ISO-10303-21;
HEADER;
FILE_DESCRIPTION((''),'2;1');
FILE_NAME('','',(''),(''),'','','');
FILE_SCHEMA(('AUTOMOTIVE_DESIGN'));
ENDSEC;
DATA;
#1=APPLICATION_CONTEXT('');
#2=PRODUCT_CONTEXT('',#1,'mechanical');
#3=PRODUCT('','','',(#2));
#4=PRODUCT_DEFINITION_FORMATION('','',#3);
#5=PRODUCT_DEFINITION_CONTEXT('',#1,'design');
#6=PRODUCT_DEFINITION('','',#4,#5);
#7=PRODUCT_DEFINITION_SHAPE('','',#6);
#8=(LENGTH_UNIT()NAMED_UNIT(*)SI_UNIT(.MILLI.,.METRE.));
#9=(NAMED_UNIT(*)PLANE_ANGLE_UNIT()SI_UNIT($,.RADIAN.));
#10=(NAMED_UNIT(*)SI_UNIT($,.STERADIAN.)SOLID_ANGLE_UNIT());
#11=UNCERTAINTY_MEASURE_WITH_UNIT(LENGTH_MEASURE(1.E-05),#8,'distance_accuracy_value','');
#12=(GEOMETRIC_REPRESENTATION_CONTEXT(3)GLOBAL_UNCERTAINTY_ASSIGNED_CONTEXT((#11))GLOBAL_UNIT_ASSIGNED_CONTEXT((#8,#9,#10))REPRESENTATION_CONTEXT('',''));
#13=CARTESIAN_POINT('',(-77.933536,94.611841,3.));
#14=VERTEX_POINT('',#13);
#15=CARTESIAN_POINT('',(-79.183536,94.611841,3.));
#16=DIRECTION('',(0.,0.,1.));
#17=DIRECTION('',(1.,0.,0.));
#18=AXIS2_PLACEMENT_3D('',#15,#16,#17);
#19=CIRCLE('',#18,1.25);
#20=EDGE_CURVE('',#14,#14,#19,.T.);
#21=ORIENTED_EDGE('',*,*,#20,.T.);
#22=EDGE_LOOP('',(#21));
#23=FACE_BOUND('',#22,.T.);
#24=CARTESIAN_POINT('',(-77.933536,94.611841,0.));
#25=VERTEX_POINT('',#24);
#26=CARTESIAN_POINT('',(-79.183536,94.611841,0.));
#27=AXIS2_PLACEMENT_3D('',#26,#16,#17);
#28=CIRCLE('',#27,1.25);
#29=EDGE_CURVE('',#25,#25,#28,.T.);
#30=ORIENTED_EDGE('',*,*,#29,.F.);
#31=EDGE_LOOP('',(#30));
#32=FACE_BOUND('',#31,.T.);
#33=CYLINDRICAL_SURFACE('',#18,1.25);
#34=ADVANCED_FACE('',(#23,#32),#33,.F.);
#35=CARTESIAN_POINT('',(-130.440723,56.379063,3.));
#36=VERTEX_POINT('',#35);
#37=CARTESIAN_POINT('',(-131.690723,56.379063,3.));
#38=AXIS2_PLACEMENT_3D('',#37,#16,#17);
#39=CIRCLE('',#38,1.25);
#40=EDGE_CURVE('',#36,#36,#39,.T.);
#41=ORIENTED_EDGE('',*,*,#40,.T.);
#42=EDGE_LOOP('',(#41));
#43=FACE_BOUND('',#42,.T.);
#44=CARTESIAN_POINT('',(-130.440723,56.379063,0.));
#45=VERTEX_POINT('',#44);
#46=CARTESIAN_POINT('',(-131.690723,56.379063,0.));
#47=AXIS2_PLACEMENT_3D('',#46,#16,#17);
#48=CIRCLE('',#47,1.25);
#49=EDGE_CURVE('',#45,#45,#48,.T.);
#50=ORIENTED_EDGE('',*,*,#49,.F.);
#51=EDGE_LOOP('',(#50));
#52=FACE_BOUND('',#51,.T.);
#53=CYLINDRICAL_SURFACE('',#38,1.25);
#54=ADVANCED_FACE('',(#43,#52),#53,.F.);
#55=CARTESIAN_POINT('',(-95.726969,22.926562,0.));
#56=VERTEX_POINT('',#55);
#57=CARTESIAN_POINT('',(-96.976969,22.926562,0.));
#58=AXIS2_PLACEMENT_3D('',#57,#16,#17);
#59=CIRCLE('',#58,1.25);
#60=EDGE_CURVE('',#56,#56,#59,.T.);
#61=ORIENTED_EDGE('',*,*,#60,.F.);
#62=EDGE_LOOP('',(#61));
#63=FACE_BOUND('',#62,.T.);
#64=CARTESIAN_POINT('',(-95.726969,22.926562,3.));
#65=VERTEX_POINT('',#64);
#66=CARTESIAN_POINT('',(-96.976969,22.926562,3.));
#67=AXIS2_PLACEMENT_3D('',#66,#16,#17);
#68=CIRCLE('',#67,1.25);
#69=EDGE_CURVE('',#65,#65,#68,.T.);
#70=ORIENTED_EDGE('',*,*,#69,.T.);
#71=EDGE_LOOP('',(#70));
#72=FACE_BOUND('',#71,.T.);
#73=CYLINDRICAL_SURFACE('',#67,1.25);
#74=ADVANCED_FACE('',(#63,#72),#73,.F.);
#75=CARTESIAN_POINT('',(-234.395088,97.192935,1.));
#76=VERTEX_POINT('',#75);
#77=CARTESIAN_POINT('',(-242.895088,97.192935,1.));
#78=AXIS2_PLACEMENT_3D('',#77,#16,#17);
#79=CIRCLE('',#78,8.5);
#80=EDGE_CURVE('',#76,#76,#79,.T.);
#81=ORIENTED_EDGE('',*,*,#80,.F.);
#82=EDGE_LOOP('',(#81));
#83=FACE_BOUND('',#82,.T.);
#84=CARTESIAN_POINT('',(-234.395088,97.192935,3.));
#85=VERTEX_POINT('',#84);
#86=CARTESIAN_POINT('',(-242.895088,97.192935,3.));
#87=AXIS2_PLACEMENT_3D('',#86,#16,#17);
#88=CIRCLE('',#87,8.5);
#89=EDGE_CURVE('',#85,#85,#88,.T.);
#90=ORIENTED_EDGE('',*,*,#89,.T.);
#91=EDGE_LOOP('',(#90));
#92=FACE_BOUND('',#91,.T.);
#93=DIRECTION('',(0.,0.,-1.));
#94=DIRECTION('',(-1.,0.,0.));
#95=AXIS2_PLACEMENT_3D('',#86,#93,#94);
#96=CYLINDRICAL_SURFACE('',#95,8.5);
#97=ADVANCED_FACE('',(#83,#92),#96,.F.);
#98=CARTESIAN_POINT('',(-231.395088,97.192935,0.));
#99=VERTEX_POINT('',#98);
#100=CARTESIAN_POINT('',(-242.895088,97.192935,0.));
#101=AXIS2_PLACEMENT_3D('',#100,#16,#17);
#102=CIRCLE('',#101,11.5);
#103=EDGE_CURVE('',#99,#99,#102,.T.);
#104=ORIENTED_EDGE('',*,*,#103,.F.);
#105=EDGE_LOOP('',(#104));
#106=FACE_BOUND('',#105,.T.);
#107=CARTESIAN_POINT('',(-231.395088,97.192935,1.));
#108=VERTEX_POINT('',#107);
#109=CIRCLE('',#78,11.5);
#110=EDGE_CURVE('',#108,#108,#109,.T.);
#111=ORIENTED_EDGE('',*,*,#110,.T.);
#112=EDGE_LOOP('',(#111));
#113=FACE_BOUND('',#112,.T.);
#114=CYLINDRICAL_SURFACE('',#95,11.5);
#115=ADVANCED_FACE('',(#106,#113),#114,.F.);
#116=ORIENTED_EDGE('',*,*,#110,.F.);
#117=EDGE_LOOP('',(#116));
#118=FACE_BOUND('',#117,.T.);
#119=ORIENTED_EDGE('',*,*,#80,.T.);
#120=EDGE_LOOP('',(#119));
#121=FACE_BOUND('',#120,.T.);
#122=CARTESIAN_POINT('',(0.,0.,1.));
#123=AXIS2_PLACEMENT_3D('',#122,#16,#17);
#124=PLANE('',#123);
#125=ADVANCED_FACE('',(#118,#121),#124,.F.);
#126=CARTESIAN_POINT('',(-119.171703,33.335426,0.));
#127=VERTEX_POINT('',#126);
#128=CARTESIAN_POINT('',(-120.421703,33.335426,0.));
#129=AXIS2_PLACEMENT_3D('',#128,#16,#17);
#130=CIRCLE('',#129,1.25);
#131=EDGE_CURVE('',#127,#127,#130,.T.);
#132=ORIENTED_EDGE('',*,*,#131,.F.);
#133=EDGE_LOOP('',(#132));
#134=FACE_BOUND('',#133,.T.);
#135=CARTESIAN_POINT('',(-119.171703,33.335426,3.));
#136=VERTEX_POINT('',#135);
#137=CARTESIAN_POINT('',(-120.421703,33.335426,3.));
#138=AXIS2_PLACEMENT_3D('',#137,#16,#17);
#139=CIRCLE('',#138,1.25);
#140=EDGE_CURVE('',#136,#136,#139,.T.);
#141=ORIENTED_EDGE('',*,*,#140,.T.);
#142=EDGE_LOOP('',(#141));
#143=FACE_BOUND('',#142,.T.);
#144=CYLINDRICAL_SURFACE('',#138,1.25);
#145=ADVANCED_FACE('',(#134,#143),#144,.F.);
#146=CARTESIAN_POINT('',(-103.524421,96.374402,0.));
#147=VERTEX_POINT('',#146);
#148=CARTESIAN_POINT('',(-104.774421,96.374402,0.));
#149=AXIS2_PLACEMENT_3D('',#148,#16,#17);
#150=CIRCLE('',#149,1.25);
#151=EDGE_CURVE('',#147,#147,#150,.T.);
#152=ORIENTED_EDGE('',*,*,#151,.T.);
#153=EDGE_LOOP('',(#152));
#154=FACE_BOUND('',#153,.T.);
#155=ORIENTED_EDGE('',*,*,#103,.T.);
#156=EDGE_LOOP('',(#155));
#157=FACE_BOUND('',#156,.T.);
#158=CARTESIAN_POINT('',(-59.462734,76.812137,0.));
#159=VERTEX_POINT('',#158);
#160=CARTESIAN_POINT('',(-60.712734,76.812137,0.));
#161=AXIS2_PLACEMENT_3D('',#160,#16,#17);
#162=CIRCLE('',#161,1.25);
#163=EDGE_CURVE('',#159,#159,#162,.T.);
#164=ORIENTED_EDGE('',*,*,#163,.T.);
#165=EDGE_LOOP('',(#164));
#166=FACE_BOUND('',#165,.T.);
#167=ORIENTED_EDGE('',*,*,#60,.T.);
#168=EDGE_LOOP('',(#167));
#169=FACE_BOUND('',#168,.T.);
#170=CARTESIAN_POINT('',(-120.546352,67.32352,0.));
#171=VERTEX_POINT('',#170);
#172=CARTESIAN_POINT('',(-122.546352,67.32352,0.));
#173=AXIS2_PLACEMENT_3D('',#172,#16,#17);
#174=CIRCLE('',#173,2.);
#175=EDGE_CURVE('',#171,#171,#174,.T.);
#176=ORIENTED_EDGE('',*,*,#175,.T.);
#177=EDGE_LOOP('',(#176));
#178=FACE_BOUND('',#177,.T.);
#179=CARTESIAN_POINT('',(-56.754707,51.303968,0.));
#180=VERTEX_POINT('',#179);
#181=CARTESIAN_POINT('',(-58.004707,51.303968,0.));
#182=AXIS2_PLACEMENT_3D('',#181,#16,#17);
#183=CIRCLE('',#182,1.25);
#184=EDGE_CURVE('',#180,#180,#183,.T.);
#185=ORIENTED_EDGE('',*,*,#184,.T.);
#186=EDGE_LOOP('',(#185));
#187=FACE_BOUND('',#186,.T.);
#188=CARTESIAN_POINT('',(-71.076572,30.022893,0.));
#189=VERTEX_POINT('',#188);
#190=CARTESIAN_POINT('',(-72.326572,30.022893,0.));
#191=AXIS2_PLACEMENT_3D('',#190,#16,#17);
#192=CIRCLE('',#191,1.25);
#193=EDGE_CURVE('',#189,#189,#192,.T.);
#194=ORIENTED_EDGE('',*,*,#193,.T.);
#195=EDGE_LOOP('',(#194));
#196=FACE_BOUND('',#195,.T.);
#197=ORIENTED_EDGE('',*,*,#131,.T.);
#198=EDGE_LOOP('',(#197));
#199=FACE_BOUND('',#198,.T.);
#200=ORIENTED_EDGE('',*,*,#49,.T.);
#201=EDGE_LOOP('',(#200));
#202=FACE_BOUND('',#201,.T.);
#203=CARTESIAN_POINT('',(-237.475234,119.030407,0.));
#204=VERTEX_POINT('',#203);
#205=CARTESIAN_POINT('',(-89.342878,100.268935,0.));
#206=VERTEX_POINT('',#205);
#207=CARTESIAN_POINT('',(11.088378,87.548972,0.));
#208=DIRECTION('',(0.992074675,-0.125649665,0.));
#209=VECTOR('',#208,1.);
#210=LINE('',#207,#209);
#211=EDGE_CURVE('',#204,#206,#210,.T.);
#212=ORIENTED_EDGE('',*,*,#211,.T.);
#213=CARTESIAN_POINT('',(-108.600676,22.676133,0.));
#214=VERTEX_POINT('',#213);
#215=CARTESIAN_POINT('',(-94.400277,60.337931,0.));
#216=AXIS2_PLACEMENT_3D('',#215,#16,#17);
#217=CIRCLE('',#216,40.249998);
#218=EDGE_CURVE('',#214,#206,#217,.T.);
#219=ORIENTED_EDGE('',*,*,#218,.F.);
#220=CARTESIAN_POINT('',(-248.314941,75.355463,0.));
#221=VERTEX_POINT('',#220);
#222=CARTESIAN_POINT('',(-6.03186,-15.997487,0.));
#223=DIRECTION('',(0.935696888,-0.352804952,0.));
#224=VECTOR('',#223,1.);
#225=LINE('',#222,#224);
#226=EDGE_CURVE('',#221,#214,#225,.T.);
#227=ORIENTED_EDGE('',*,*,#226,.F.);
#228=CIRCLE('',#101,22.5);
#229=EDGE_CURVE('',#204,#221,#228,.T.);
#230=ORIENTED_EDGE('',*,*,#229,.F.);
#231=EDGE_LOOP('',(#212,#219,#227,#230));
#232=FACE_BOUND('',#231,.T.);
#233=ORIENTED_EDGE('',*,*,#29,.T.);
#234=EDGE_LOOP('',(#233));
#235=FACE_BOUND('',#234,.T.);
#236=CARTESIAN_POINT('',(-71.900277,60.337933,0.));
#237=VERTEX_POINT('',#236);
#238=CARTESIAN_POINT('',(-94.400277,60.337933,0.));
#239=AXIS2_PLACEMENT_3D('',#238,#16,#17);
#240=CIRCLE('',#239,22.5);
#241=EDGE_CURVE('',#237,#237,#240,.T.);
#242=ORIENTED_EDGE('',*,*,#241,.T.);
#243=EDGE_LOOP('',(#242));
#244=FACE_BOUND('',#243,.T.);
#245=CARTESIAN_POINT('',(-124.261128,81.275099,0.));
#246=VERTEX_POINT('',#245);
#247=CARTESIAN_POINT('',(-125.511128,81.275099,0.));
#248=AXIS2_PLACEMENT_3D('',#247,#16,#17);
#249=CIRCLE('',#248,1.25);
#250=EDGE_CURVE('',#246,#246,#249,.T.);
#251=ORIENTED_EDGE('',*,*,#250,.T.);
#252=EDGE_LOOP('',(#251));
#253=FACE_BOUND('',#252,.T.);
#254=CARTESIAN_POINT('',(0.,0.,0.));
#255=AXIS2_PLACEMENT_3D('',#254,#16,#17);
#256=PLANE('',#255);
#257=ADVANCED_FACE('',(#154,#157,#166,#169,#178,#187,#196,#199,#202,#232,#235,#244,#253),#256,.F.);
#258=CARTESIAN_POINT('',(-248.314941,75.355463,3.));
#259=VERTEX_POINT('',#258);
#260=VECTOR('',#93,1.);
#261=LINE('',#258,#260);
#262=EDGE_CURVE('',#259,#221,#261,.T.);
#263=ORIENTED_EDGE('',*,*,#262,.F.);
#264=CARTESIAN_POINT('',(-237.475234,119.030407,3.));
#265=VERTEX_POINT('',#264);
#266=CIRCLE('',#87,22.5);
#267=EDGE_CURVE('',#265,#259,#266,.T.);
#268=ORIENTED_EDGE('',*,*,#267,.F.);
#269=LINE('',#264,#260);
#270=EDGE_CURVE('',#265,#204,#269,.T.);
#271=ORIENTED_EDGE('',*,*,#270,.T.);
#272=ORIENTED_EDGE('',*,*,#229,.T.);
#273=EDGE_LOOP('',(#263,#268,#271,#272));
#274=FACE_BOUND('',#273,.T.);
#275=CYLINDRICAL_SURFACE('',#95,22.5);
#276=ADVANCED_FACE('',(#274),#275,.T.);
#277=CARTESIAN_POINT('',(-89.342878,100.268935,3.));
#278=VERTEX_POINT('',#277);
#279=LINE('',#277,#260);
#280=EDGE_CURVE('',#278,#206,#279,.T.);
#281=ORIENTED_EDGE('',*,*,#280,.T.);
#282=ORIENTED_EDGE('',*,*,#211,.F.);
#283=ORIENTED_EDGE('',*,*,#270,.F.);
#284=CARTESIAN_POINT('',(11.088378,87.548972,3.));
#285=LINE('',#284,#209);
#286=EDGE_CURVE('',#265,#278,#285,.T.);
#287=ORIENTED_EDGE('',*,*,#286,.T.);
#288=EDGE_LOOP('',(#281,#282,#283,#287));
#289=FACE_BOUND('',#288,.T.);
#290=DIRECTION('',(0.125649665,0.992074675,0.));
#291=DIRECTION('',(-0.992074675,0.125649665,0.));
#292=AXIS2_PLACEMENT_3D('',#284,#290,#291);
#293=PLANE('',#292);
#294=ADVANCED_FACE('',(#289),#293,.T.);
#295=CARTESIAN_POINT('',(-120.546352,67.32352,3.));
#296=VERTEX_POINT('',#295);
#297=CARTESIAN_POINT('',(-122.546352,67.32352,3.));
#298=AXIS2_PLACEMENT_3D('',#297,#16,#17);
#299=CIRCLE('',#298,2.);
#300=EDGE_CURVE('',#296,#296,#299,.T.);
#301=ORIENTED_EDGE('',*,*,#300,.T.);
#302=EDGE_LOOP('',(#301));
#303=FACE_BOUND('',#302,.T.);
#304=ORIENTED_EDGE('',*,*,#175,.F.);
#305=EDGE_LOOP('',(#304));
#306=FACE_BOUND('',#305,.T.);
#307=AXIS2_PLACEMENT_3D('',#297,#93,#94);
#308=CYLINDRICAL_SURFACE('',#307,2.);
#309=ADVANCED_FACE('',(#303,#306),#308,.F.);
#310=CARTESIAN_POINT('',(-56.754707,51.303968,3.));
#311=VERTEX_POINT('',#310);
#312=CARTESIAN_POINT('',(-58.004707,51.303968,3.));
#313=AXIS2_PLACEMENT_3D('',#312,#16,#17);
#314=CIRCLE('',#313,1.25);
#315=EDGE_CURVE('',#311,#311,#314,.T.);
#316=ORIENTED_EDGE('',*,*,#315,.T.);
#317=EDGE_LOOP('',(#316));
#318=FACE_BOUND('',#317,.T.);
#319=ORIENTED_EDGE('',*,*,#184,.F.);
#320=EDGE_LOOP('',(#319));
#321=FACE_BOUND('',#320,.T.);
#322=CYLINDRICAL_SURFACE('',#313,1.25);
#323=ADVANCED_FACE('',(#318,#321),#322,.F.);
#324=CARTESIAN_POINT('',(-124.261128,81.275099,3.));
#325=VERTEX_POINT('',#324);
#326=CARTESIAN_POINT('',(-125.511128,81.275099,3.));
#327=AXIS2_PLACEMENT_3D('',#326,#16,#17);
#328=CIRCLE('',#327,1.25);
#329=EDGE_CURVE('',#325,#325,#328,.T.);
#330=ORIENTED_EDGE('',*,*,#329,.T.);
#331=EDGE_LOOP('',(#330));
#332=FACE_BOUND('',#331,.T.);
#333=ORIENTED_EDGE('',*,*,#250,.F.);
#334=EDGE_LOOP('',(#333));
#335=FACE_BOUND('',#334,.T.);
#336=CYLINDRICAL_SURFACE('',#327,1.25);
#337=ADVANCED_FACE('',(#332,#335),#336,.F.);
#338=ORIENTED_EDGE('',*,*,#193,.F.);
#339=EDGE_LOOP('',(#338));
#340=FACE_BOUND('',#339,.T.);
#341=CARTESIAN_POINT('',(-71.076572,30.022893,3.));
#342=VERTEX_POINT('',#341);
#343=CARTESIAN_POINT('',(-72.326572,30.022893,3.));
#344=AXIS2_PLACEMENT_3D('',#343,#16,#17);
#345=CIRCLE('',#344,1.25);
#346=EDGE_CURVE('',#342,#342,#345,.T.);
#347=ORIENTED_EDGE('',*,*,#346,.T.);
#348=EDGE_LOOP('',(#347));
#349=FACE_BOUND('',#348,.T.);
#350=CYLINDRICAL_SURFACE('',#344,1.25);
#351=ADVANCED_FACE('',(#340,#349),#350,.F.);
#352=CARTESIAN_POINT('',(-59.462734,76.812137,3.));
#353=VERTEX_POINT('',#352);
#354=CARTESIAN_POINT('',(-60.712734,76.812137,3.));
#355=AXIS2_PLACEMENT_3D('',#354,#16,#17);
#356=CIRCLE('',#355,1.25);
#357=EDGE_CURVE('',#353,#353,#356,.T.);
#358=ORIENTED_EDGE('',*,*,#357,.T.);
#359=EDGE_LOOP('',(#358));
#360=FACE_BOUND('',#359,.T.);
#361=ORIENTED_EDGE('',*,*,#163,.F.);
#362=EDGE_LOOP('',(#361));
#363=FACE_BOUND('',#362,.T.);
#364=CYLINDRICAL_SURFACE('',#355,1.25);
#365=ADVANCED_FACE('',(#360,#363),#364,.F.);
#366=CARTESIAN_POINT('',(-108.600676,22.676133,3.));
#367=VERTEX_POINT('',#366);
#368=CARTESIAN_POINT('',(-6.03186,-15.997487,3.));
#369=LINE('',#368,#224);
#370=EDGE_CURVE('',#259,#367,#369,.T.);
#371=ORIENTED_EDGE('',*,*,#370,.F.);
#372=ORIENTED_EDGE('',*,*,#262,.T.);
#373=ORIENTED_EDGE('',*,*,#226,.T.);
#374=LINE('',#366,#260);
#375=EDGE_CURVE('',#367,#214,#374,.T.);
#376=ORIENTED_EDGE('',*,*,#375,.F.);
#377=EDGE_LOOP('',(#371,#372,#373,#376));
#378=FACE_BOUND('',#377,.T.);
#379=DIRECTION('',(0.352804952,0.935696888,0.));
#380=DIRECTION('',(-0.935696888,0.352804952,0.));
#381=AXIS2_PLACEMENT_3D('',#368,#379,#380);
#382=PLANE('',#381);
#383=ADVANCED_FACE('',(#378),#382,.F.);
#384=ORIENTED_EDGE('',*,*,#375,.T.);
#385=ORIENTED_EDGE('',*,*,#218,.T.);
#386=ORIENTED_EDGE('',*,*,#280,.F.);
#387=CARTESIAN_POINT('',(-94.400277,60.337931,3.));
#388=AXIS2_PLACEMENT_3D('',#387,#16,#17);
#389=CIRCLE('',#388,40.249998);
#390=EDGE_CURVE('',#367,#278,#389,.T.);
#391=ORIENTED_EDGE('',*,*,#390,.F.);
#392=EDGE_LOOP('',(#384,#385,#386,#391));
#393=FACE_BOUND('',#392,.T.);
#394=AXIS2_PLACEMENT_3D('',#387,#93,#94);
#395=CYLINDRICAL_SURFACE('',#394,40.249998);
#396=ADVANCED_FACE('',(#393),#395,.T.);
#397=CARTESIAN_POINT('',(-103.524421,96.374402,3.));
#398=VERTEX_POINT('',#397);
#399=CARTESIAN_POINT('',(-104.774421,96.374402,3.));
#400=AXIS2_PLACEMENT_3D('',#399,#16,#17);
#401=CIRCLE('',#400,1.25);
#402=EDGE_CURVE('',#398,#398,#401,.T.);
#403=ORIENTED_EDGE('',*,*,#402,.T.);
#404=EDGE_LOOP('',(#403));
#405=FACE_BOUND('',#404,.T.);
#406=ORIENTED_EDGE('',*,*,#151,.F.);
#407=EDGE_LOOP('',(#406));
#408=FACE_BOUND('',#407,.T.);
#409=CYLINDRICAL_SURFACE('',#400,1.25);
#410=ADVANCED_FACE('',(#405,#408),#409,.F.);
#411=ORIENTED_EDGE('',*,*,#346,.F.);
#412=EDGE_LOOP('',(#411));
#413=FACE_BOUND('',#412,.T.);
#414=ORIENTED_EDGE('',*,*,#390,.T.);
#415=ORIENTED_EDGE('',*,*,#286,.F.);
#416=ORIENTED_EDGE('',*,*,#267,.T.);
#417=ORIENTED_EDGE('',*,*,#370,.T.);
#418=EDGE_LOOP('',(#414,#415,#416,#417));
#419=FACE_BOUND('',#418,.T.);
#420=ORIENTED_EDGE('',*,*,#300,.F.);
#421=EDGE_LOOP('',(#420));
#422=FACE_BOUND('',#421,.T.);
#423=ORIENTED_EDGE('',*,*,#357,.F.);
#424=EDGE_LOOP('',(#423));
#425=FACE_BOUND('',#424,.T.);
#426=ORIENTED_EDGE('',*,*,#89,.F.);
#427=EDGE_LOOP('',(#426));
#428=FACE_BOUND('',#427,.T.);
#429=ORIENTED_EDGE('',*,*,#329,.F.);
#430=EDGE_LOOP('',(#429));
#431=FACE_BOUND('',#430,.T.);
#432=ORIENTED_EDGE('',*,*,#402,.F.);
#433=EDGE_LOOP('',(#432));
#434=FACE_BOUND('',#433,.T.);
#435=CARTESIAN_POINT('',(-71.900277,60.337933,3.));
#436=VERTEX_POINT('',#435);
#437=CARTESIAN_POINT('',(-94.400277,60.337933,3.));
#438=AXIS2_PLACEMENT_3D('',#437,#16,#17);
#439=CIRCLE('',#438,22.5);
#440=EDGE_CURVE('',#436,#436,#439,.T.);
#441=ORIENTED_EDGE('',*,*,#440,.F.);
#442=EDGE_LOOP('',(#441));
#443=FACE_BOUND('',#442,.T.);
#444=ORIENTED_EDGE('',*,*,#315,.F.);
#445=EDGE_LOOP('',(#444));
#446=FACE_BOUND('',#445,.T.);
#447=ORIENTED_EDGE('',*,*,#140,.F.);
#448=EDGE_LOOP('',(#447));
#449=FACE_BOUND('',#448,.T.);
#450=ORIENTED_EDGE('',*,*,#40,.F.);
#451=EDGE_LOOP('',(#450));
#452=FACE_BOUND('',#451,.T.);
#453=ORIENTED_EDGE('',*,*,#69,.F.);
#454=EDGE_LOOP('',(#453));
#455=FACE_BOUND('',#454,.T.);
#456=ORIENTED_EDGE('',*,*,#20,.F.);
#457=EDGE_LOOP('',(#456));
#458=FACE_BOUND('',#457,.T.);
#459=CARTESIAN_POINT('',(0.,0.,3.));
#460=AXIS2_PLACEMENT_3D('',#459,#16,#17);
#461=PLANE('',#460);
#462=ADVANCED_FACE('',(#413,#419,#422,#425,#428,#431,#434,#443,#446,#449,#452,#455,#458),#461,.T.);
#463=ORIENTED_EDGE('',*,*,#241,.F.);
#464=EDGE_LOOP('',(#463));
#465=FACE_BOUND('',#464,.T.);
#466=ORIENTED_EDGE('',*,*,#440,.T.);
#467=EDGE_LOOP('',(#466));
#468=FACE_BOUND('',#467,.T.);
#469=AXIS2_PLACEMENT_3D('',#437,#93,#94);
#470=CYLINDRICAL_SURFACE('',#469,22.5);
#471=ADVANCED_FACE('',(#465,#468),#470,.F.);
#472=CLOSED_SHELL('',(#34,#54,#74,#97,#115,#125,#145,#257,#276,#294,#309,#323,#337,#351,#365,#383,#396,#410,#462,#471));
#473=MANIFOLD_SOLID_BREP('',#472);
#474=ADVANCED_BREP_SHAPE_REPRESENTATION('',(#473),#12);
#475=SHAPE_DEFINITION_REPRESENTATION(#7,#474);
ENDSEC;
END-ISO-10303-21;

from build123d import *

# Parameters (mm, degrees)
SKETCH_2_R         = 11.5
SKETCH_2_R_2       = 22.5
SKETCH_2_R_3       = 2
EXTRUDE_1_DEPTH    = 3
EXTRUDE_START      = 1
SKETCH_2_3_R       = 11.5
SKETCH_2_3_R_2     = 8.5
EXTRUDE_2_DEPTH    = 2
HOLE_WIZARD_M3_1_D = 2.5


with BuildPart() as part:
    # 草图2 → 凸台-拉伸1 (new body)
    with BuildSketch(Plane.XY):
        with BuildLine():
            Line((-89.342878346, 100.2689352), (-237.47523438, 119.030406823))
            ThreePointArc((-237.47523438, 119.030406823), (-264.732559951, 102.612788157), (-248.314941285, 75.355462585))
            Line((-248.314941285, 75.355462585), (-108.600675895, 22.676132978))
            ThreePointArc((-108.600675895, 22.676132978), (-55.335467517, 50.642415933), (-89.342878346, 100.2689352))
        make_face()
        with Locations((-242.895087832, 97.192934704)):
            Circle(SKETCH_2_R, mode=Mode.SUBTRACT)
        with Locations((-94.40027703, 60.337932808)):
            Circle(SKETCH_2_R_2, mode=Mode.SUBTRACT)
        with Locations((-122.546352319, 67.32352005)):
            Circle(SKETCH_2_R_3, mode=Mode.SUBTRACT)
    extrude(amount=EXTRUDE_1_DEPTH)

    # 草图2<3> → 凸台-拉伸2 (add)
    with BuildSketch(Plane.XY.offset(EXTRUDE_START)):
        with Locations((-242.895087832, 97.192934704)):
            Circle(SKETCH_2_3_R)
        with Locations((-242.895087832, 97.192934704)):
            Circle(SKETCH_2_3_R_2, mode=Mode.SUBTRACT)
    extrude(amount=EXTRUDE_2_DEPTH)

    # M3 螺纹孔1 (through all)
    with Locations(Plane.XY.offset(3)):
        with Locations((-79.183536118, 94.611841193), (-60.712733566, 76.812137352), (-58.004707111, 51.303968462), (-72.326572251, 30.022892769), (-96.97696912, 22.926562105), (-120.421703236, 33.33542592), (-131.690722835, 56.379062808), (-125.511128404, 81.275098967), (-104.774420857, 96.374402389)):
            Hole(HOLE_WIZARD_M3_1_D / 2)


solid = part.part
